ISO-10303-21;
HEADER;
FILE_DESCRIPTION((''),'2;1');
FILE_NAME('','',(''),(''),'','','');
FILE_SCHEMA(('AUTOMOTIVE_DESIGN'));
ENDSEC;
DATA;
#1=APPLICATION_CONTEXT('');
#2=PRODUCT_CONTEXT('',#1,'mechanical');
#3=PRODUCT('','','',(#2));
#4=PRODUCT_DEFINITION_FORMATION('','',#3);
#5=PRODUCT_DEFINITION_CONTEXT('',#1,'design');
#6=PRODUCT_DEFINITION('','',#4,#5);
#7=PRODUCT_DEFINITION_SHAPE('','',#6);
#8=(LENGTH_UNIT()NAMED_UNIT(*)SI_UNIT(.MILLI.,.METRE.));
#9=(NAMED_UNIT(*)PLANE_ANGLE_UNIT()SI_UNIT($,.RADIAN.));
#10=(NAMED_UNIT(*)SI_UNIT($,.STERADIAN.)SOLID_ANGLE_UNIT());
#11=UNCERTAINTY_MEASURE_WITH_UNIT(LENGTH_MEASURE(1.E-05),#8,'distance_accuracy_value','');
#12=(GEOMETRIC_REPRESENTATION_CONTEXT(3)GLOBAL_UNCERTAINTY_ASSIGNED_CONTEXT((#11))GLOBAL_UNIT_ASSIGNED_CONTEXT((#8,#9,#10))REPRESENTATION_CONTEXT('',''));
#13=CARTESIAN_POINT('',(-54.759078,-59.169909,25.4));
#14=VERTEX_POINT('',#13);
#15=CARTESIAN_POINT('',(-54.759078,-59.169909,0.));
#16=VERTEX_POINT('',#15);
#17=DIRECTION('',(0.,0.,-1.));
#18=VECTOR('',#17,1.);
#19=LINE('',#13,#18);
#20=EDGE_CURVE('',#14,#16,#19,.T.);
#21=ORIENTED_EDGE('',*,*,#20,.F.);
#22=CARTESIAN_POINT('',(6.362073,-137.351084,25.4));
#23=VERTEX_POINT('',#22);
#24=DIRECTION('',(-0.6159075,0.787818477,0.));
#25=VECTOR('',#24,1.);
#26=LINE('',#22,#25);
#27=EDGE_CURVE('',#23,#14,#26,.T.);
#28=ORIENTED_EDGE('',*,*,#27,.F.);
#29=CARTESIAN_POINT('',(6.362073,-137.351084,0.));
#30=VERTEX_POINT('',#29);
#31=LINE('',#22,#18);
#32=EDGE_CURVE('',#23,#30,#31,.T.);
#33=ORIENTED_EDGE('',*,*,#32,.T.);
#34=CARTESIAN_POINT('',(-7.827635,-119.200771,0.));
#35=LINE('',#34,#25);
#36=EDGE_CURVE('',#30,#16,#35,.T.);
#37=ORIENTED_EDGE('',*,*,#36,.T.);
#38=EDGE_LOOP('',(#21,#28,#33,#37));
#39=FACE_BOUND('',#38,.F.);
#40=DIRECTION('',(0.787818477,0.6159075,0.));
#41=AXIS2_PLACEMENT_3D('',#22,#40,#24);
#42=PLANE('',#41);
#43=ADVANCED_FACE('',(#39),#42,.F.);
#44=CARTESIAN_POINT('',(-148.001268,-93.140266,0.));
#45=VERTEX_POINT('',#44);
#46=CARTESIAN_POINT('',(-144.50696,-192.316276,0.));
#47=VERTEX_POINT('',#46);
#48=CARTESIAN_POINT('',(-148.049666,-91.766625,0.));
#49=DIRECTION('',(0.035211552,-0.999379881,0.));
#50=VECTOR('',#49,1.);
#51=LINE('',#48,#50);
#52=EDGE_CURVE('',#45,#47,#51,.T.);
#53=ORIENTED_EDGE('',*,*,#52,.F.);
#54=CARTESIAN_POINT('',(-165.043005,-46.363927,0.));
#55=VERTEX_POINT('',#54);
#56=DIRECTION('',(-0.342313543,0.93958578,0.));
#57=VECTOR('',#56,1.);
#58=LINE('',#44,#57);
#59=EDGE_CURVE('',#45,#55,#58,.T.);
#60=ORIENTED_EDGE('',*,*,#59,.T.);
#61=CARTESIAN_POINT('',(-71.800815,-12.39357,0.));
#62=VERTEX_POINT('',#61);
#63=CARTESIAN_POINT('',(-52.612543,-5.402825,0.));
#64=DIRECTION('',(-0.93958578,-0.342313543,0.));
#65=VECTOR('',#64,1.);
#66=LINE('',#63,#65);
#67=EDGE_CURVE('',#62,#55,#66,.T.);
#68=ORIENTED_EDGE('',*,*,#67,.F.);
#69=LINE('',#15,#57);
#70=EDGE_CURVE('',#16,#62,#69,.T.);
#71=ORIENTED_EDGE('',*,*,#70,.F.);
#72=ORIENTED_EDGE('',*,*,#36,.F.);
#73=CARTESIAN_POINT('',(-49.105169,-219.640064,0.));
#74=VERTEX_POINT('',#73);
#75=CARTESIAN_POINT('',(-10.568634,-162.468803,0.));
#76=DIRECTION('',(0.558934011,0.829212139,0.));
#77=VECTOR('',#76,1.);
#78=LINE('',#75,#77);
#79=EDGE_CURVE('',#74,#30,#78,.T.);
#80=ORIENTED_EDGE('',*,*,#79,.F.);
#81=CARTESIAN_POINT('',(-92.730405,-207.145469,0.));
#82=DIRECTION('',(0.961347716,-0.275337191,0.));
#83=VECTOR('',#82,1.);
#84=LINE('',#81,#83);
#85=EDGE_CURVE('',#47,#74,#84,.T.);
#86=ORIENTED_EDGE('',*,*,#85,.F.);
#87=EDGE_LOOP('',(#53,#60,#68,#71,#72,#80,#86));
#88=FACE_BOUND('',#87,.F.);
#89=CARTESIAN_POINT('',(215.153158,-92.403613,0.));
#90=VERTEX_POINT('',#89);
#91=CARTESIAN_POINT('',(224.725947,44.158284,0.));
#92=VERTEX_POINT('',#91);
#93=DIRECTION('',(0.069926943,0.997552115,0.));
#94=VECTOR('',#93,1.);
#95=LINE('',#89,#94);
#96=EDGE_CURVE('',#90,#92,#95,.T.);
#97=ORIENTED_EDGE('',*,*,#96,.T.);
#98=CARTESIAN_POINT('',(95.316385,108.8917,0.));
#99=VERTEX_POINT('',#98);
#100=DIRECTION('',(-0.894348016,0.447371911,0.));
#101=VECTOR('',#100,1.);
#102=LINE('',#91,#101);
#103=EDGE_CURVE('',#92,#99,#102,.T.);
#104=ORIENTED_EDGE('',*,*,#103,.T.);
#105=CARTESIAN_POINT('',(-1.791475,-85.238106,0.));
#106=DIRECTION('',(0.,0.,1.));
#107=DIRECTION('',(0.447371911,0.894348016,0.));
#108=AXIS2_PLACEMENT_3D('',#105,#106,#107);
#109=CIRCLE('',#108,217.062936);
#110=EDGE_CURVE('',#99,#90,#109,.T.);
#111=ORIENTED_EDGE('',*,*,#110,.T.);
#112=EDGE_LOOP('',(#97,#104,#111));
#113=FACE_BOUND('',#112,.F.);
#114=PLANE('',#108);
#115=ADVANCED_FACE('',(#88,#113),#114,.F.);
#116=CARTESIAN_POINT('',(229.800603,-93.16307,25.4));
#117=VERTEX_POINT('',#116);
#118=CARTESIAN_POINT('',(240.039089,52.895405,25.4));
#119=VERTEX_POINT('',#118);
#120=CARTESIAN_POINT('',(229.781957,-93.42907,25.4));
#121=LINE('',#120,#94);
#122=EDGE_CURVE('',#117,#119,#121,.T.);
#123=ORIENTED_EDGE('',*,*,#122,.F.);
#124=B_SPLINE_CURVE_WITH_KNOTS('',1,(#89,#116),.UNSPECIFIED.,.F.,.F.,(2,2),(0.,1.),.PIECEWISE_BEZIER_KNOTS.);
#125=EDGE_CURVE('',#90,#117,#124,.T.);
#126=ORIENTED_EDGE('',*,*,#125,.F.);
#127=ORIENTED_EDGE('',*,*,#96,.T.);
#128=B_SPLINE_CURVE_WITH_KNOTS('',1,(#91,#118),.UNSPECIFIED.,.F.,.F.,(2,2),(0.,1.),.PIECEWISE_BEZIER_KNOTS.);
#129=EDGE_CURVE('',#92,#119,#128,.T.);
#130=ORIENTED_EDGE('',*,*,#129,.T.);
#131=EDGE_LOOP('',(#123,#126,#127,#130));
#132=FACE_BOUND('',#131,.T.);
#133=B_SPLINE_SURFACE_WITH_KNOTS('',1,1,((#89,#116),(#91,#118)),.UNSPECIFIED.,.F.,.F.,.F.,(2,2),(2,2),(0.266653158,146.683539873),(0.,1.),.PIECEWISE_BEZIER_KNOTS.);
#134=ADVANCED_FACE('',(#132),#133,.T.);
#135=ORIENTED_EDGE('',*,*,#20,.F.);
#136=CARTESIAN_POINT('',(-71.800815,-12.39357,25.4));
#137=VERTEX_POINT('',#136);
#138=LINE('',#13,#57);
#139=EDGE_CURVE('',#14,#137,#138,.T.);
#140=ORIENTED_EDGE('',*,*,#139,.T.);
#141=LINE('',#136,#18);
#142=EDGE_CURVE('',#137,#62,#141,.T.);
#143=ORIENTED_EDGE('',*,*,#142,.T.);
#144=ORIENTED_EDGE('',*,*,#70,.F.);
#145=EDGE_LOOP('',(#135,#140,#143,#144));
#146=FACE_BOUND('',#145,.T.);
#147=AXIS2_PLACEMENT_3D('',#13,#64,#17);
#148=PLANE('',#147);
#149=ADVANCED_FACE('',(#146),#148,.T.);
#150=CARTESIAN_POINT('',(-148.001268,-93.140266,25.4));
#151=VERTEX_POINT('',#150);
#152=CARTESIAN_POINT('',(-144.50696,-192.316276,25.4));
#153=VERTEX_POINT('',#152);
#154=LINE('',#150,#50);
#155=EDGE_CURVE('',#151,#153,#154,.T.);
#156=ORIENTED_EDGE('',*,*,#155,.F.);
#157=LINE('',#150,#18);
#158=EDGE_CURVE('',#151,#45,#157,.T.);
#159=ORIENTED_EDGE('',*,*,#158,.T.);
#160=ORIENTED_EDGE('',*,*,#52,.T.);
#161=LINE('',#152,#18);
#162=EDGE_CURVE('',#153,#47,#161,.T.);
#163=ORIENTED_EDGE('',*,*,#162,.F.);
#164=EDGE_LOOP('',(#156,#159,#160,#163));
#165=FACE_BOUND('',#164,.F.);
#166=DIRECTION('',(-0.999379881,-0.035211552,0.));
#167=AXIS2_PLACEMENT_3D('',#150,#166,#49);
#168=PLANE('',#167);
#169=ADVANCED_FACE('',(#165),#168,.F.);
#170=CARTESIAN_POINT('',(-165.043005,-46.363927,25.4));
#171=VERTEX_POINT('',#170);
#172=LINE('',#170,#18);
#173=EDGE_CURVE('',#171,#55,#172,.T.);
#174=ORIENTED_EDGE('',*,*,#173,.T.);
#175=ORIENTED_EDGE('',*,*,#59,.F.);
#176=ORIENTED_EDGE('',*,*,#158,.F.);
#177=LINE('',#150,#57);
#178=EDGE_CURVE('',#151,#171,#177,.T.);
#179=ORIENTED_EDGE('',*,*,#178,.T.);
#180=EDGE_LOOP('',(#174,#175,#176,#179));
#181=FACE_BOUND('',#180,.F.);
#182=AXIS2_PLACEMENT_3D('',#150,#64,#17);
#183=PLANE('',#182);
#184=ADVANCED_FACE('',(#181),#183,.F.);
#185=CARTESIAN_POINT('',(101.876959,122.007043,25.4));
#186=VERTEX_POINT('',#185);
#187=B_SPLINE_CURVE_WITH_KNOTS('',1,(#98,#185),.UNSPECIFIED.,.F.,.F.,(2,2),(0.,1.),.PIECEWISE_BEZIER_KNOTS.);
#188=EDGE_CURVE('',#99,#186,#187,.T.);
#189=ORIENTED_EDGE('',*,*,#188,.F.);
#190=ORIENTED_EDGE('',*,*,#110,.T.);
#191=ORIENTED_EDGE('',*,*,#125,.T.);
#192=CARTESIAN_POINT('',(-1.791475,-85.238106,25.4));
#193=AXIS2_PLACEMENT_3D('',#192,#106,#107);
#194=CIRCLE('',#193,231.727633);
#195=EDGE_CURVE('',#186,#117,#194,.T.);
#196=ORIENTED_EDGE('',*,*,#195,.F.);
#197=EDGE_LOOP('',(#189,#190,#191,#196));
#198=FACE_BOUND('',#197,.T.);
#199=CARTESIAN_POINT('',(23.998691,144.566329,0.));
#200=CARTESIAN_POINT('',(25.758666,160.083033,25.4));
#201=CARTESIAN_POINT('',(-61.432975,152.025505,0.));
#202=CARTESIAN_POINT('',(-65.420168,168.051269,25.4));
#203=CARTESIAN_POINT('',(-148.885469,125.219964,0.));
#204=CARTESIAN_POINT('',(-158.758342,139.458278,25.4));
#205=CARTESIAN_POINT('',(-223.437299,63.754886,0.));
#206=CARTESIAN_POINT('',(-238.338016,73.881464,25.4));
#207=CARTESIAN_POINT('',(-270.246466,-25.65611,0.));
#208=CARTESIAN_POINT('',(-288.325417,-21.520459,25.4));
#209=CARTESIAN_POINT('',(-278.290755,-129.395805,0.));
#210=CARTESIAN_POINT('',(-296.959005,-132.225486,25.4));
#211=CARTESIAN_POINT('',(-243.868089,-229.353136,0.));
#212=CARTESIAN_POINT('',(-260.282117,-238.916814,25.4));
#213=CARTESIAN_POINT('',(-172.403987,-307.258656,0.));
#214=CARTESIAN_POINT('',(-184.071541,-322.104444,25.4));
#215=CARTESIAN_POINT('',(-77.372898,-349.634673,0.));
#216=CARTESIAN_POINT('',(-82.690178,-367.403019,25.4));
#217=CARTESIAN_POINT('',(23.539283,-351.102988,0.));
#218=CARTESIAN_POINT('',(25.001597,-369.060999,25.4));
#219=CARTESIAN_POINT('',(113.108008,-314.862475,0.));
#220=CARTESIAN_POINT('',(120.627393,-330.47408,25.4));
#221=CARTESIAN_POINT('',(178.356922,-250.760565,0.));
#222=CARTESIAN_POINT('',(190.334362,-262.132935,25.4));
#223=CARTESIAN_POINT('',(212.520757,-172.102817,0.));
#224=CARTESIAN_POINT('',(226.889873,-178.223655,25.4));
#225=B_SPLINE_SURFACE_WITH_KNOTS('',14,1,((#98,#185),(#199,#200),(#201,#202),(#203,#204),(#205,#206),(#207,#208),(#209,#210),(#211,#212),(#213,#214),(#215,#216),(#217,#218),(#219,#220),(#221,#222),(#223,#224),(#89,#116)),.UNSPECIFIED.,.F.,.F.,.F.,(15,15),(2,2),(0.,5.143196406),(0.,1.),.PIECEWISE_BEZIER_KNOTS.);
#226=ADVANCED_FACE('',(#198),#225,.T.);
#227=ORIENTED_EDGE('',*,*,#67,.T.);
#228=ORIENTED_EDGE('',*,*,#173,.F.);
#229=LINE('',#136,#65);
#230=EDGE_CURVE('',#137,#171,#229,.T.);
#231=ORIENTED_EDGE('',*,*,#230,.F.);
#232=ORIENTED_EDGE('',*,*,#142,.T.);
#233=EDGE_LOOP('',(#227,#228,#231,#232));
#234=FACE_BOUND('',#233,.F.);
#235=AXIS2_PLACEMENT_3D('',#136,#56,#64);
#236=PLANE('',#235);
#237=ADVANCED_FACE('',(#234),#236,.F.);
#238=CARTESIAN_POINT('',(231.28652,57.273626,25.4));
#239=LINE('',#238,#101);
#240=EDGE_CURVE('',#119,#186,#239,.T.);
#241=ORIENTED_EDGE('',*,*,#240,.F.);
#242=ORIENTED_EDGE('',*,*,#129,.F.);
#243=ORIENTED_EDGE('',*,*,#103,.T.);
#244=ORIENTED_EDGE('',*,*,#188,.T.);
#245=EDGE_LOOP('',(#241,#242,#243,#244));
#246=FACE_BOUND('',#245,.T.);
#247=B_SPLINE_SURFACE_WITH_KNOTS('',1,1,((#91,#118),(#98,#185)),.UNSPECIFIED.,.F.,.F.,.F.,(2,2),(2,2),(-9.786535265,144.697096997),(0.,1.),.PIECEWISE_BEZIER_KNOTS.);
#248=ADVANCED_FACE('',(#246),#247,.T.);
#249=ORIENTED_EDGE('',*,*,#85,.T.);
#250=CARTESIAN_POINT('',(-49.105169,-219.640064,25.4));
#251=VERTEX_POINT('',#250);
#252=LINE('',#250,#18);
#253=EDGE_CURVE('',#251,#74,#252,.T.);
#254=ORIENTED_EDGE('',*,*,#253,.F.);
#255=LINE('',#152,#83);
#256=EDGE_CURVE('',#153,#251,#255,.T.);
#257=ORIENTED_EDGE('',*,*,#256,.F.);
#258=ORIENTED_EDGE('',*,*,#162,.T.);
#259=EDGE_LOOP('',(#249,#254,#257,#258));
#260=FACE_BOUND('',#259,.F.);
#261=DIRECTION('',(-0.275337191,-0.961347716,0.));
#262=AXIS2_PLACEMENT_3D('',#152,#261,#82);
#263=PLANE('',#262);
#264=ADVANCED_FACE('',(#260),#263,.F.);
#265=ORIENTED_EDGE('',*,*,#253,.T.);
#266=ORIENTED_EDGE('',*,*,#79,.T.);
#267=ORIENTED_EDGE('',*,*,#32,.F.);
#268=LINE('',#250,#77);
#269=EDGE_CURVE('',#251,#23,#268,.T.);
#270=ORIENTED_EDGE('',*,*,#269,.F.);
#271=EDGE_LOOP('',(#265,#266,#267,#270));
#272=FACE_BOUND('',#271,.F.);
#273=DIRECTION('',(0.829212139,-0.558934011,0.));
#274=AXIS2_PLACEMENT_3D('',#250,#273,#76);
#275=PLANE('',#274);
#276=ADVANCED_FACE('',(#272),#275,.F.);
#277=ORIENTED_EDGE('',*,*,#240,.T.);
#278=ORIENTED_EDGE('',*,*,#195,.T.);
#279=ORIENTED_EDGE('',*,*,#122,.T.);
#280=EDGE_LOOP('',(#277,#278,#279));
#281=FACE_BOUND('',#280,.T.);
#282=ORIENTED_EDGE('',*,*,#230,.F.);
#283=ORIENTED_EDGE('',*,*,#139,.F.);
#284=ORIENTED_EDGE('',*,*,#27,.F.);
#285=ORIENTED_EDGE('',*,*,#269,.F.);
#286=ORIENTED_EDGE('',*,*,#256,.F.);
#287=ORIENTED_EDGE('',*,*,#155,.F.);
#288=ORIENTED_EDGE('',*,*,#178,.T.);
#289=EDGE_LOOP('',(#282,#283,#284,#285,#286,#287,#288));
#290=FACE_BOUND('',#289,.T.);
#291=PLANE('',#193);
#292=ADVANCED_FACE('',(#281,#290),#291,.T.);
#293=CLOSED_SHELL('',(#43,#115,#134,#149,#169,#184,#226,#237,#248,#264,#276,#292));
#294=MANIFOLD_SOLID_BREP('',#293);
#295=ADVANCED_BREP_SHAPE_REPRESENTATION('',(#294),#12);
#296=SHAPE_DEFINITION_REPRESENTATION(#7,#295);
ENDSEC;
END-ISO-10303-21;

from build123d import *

# Parameters (mm, degrees)
F3_DEPTH = 25.4
F3_TAPER = -30
F5_DEPTH = 74.422
F6_DEPTH = 49.784


# Not quite as in the source:
# - the program builds the solid bodies; features that only make, move or delete a surface that nothing else refers to are left out


with BuildPart() as f3:
    # F2 (on Top) → F3 (new body)
    with BuildSketch(Plane.XY):
        with BuildLine():
            ThreePointArc((95.3163852149, 108.891700447), (-188.3047271115, -196.2747006031), (215.153157711, -92.4036128949))
            Line((215.153157711, -92.4036128949), (224.725946784, 44.1582836211))
            Line((224.725946784, 44.1582836211), (95.3163852149, 108.891700447))
        make_face()
    extrude(amount=F3_DEPTH, taper=F3_TAPER)

    # F4 (on face) → F5 (cut)
    with BuildSketch(Plane.XY.offset(25.4)):
        Polygon((-144.5069598745, -192.3162760185), (-49.1051686216, -219.640064056), (6.3620728322, -137.351083673), (-54.75907794, -59.1699088592), (-148.0012680026, -93.1402659269), align=None)
    extrude(amount=-F5_DEPTH, mode=Mode.SUBTRACT)

    # F6 (cut): a face of the model
    f6_faces = [f3.faces().sort_by_distance(p)[0] for p in [
        (-101.3801729713, -76.1550873931, 12.7),
    ]]
    extrude(f6_faces, amount=-F6_DEPTH, mode=Mode.SUBTRACT)


solid = f3.part
